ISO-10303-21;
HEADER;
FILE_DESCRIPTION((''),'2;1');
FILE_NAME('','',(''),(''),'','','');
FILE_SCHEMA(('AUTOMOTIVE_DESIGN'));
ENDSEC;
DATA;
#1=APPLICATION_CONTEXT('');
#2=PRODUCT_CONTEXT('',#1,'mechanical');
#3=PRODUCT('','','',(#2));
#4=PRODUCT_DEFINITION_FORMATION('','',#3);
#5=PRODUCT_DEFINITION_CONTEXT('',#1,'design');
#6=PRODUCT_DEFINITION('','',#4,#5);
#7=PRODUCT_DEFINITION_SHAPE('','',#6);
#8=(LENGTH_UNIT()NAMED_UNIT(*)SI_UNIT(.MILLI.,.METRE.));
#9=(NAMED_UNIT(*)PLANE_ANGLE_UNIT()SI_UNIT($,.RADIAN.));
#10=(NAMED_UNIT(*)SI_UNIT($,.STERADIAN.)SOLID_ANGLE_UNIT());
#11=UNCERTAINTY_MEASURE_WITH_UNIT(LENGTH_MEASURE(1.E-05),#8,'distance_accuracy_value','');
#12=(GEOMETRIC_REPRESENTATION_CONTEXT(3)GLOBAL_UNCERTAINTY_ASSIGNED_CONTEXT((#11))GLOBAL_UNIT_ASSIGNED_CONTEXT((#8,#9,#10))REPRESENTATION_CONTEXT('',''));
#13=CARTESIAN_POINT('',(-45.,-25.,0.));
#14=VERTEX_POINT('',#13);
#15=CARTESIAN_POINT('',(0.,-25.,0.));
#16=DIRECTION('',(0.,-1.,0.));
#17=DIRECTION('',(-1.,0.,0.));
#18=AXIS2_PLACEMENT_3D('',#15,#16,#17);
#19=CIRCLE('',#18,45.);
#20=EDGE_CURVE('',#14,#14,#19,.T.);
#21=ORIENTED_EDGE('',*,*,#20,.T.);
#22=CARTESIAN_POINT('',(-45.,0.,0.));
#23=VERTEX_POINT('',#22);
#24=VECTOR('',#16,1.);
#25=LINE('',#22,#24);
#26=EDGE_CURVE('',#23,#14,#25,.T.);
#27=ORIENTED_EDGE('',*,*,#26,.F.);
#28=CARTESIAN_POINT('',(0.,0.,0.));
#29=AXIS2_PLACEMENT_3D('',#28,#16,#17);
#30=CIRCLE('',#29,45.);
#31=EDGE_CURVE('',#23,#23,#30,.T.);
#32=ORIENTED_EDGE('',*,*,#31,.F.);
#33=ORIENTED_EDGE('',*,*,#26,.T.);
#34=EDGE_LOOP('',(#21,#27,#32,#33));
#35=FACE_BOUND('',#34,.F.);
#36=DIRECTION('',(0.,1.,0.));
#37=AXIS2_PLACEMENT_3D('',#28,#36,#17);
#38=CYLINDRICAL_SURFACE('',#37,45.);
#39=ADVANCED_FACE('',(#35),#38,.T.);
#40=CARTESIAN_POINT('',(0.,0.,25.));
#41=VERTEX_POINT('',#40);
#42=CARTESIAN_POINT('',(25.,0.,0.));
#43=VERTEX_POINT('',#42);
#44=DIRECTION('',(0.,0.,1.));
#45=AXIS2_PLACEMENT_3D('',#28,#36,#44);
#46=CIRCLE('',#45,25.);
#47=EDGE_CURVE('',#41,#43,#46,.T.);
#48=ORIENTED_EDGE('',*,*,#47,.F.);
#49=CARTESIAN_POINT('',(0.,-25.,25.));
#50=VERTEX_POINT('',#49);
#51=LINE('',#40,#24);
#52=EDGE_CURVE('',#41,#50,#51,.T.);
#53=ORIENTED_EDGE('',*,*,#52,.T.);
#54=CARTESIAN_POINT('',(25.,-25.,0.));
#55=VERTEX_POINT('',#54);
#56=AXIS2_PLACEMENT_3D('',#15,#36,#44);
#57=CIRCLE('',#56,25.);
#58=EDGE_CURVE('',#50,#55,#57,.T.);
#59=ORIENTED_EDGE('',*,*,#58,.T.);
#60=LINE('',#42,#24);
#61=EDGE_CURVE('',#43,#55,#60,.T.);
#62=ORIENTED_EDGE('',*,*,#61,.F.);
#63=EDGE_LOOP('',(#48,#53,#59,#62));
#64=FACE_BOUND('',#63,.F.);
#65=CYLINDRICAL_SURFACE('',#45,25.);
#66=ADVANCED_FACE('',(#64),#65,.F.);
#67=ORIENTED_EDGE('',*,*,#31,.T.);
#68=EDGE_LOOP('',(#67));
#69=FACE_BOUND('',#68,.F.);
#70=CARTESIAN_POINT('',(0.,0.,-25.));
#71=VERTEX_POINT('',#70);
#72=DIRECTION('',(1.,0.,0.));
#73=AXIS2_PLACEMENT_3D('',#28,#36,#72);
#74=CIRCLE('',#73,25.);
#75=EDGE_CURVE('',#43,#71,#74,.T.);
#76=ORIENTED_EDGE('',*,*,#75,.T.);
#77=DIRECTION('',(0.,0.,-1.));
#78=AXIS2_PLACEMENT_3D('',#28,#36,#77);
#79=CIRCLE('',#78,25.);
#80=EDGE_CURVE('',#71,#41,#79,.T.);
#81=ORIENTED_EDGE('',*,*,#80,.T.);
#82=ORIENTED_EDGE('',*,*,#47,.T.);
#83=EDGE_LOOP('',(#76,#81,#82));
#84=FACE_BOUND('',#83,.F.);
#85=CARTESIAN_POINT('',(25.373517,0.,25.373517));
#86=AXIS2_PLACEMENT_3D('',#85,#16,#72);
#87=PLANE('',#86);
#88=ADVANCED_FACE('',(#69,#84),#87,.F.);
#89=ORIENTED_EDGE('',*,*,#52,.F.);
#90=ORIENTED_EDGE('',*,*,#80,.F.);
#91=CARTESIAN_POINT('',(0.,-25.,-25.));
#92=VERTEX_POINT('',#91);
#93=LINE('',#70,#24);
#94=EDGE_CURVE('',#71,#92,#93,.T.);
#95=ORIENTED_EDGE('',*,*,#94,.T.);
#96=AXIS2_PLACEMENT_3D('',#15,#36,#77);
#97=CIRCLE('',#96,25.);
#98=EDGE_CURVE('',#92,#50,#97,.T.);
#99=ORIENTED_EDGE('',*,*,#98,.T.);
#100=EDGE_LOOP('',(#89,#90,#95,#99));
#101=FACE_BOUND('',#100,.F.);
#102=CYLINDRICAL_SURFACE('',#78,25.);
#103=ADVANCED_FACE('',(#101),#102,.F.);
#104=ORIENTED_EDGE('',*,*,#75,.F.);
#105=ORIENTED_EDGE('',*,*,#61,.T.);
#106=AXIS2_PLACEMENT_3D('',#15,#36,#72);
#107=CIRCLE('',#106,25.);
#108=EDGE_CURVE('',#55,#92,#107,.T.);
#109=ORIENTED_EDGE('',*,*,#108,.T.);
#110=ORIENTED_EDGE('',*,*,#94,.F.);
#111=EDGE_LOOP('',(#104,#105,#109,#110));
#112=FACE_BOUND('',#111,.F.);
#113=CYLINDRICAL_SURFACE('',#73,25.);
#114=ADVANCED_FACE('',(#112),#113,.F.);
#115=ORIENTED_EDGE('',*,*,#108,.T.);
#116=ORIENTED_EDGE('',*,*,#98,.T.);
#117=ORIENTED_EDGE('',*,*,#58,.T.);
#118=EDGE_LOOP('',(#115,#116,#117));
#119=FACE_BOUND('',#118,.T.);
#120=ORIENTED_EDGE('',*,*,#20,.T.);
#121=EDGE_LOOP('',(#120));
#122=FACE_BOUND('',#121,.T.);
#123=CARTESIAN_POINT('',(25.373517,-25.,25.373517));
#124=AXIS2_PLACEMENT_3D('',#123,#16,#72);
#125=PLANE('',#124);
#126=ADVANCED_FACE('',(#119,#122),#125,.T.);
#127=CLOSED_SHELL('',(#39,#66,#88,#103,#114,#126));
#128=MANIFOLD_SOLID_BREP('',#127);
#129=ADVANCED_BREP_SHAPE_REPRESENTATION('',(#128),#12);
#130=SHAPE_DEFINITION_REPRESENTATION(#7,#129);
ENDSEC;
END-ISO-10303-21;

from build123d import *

# Parameters (mm, degrees)
F1_DEPTH = 25


with BuildPart() as f1:
    # F0 (on Front) → F1 (new body)
    with BuildSketch(Plane.XZ):
        with BuildLine():
            Line((0, 45), (45, 0))
            ThreePointArc((45, 0), (31.8198051534, 31.8198051534), (0, 45))
        make_face()
        with BuildLine():
            Line((0, -45), (45, 0))
            Line((45, 0), (0, 45))
            Line((0, 45), (0, 25))
            ThreePointArc((0, 25), (17.6776695297, 17.6776695297), (25, 0))
            ThreePointArc((25, 0), (17.6776695297, -17.6776695297), (0, -25))
            Line((0, -25), (0, -45))
        make_face()
        with BuildLine():
            ThreePointArc((0, -45), (31.8198051534, -31.8198051534), (45, 0))
            Line((45, 0), (0, -45))
        make_face()
        with BuildLine():
            Line((-45, 0), (0, 45))
            ThreePointArc((0, 45), (-31.8198051534, 31.8198051534), (-45, 0))
        make_face()
        with BuildLine():
            Line((0, 25), (0, 45))
            Line((0, 45), (-45, 0))
            Line((-45, 0), (0, -45))
            Line((0, -45), (0, -25))
            ThreePointArc((0, -25), (-25, 0), (0, 25))
        make_face()
        with BuildLine():
            ThreePointArc((-45, 0), (-31.8198051534, -31.8198051534), (0, -45))
            Line((0, -45), (-45, 0))
        make_face()
    extrude(amount=F1_DEPTH)


solid = f1.part
